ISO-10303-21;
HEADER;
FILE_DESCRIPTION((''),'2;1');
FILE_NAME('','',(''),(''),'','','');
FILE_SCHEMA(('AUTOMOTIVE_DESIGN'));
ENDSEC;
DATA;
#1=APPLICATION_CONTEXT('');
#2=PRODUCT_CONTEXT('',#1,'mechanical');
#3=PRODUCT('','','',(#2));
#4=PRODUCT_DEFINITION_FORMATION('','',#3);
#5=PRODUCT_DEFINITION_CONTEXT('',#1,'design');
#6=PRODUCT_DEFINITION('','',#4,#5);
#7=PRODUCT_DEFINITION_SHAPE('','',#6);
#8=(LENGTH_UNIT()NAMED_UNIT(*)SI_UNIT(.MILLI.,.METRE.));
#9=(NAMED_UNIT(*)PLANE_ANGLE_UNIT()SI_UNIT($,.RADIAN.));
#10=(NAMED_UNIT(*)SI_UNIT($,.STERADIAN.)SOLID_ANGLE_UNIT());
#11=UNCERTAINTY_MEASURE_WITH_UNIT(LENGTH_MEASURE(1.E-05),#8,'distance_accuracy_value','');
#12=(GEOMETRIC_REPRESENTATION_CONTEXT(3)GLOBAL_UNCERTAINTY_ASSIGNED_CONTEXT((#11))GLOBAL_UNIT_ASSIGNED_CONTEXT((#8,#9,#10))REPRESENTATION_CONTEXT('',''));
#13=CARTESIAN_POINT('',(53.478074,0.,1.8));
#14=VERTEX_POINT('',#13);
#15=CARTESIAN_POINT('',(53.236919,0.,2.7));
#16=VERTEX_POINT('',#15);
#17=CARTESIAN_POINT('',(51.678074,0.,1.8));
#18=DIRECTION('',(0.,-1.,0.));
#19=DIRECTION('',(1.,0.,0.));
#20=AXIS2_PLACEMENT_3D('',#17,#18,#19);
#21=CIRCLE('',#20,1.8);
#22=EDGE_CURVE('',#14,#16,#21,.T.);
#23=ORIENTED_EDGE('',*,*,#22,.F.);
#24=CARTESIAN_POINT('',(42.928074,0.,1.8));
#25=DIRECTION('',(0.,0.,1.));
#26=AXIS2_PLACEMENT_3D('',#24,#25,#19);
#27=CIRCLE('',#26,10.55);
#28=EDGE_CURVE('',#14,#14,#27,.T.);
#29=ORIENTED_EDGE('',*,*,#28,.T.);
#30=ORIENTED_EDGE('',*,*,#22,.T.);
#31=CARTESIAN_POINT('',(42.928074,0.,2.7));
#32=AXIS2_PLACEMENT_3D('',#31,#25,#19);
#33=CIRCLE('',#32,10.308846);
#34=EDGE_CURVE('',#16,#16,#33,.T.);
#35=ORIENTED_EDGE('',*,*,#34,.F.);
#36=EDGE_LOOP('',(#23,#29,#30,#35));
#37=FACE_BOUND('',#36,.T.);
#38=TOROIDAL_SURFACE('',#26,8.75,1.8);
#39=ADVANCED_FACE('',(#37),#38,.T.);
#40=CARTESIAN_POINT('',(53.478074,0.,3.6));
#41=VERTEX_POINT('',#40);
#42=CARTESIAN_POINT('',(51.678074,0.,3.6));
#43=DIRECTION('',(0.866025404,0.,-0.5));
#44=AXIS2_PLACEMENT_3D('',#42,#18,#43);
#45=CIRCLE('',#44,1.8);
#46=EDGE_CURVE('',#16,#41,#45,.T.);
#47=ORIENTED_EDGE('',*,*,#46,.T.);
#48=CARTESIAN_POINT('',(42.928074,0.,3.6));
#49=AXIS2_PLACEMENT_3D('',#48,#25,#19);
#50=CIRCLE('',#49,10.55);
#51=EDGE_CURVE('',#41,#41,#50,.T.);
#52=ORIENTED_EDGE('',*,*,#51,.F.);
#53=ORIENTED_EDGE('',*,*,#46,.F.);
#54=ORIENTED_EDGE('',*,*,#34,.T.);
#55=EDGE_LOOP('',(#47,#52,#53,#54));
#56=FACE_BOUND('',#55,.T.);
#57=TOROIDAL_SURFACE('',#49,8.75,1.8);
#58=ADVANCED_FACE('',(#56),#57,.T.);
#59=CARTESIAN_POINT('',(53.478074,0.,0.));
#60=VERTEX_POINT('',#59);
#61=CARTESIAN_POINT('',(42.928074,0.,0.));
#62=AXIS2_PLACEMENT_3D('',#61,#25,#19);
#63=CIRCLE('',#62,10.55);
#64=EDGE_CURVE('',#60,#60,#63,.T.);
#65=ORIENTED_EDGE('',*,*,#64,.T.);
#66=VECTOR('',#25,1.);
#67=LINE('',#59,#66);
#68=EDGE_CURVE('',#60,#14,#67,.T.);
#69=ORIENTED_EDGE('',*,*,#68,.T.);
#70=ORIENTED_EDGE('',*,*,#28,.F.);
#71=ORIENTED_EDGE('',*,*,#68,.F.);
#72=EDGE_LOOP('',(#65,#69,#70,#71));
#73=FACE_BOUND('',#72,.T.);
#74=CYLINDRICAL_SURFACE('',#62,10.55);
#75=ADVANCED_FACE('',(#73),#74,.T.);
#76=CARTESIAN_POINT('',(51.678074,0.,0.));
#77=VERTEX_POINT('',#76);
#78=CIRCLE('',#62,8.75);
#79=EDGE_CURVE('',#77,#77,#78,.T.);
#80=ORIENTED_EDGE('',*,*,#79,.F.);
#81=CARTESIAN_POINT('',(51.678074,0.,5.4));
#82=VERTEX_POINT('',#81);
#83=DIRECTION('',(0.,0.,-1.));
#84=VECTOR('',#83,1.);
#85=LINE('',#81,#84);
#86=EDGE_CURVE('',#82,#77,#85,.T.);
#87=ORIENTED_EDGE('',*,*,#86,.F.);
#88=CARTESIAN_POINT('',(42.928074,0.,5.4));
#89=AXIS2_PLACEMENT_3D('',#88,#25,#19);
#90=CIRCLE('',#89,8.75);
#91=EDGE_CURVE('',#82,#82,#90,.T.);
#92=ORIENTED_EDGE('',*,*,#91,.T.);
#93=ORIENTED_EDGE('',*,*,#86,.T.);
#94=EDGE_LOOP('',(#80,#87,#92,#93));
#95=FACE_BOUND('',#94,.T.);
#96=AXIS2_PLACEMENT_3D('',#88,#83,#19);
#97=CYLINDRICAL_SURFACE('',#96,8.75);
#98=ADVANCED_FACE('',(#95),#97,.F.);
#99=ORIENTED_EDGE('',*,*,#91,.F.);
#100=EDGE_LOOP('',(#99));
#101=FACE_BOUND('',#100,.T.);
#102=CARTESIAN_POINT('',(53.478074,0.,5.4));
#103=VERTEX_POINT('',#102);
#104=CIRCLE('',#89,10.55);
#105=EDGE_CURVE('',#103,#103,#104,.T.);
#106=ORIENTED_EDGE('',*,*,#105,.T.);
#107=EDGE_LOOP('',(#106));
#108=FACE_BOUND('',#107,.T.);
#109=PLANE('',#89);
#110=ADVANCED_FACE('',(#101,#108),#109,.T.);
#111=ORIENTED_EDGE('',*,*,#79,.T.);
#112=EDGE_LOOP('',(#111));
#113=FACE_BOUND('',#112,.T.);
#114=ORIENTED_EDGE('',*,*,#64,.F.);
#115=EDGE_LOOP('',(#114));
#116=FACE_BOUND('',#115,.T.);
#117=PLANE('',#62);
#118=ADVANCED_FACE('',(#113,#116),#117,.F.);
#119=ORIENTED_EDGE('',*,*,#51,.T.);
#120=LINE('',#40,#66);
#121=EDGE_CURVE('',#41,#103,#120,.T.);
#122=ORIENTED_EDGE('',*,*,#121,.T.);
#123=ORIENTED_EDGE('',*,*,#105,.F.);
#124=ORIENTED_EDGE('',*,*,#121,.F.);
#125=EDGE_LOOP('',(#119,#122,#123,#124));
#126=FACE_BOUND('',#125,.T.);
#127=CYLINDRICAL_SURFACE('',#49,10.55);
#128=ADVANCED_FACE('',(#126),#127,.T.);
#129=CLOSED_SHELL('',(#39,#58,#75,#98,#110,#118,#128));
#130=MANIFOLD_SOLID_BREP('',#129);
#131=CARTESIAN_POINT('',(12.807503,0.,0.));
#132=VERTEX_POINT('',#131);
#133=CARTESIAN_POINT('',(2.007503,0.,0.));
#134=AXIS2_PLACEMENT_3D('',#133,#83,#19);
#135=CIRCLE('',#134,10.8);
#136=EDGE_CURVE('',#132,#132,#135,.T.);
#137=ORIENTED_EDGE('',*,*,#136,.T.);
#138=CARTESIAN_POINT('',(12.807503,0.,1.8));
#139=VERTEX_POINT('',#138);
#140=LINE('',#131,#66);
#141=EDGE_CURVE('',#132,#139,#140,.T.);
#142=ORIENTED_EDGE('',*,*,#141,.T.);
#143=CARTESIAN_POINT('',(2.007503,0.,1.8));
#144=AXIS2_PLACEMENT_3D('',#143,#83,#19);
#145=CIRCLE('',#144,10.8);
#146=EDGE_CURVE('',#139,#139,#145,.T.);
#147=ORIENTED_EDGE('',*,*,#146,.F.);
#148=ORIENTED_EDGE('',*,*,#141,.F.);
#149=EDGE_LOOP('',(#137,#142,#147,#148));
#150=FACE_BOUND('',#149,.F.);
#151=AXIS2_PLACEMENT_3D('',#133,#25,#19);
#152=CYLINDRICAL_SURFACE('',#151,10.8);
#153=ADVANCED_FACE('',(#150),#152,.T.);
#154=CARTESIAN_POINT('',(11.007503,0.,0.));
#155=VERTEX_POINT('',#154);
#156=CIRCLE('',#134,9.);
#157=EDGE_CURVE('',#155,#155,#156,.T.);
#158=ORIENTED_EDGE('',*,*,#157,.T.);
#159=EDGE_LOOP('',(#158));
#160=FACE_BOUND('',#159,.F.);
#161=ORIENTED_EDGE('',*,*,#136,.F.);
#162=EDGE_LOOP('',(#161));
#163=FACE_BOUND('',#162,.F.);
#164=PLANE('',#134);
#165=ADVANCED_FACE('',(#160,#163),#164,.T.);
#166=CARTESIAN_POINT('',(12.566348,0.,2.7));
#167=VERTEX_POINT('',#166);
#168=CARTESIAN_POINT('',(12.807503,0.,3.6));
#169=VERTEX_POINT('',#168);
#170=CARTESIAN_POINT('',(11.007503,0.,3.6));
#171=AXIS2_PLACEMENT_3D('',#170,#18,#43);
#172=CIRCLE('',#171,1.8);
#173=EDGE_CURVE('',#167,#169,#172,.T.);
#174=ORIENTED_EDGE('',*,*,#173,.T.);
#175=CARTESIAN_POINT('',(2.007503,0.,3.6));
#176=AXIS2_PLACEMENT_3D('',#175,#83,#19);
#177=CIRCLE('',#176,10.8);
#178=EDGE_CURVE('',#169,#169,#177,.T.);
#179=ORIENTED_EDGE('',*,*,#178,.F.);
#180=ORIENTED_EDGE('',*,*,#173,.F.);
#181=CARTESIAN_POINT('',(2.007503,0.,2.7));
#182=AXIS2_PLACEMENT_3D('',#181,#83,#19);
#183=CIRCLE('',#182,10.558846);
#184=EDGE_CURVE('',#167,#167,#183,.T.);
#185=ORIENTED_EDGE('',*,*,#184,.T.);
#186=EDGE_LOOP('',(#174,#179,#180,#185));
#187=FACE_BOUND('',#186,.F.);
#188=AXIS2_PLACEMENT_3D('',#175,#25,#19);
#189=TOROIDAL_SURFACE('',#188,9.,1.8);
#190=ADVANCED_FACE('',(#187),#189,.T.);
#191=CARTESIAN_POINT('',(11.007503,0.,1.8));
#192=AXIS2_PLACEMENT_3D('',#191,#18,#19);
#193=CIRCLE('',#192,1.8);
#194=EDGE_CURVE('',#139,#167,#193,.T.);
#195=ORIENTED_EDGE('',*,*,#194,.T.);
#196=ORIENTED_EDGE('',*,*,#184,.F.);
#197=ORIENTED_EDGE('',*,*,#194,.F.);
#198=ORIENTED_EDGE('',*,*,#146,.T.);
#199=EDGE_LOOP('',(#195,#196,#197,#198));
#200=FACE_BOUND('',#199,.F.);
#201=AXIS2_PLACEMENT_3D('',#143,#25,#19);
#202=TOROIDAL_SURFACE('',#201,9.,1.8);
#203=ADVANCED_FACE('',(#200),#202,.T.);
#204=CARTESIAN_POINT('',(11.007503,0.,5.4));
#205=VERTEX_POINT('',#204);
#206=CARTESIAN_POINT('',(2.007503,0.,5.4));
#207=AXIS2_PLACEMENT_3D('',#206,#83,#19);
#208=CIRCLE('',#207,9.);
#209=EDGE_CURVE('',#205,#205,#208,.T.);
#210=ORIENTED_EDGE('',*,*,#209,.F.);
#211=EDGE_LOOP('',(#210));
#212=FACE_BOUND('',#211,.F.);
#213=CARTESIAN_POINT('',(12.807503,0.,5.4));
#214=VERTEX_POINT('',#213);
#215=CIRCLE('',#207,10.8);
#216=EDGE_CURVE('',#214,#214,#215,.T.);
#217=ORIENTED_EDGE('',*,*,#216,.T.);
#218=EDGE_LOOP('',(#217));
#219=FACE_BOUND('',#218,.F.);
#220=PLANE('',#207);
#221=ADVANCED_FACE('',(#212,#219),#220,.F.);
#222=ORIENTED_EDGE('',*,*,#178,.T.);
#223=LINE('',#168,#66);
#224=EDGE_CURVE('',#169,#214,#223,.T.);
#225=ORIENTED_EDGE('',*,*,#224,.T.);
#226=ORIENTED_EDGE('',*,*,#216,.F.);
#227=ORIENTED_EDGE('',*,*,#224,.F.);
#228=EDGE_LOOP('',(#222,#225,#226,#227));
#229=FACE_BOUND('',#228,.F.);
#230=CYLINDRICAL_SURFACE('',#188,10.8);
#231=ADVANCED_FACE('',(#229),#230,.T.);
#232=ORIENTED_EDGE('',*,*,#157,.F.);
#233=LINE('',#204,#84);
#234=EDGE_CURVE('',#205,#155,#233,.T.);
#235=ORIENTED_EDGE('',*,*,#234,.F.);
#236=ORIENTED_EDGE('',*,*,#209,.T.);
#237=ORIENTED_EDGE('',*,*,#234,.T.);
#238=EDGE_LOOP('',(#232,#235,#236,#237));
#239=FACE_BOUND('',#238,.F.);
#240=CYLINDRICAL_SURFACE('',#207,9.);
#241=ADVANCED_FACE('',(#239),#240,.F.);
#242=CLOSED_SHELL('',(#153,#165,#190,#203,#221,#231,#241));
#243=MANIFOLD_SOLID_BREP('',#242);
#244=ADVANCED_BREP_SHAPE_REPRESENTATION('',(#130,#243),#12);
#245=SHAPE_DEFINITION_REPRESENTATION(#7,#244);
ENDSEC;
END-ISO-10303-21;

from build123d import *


with BuildPart() as f1:
    # F0 (on Front) → F1 (revolve)
    with BuildSketch(Plane.XZ):
        with BuildLine():
            Line((11.0075026751, 1.8), (11.0075026751, 0))
            ThreePointArc((11.0075026751, 0), (12.2802948812, 0.5272077939), (12.8075026751, 1.8))
            ThreePointArc((12.8075026751, 1.8), (12.7461691624, 2.2658742812), (12.5663484019, 2.7))
            ThreePointArc((12.5663484019, 2.7), (11.9075026751, 2.0411542732), (11.0075026751, 1.8))
        make_face()
        with BuildLine():
            ThreePointArc((12.8075026751, 1.8), (12.2802948812, 0.5272077939), (11.0075026751, 0))
            Line((11.0075026751, 0), (12.8075026751, 0))
            Line((12.8075026751, 0), (12.8075026751, 1.8))
        make_face()
        with BuildLine():
            Line((11.0075026751, 2.7), (11.0075026751, 1.8))
            ThreePointArc((11.0075026751, 1.8), (11.9075026751, 2.0411542732), (12.5663484019, 2.7))
            ThreePointArc((12.5663484019, 2.7), (12.528210521, 2.7630408337), (12.4875246825, 2.8244680851))
            ThreePointArc((12.4875246825, 2.8244680851), (11.8429538845, 3.3943717498), (11.0075026751, 3.6))
            Line((11.0075026751, 3.6), (11.0075026751, 2.7))
        make_face()
        with BuildLine():
            ThreePointArc((12.4875246825, 2.8244680851), (12.528210521, 2.7630408337), (12.5663484019, 2.7))
            ThreePointArc((12.5663484019, 2.7), (12.7461691624, 3.1341257188), (12.8075026751, 3.6))
            Line((12.8075026751, 3.6), (12.8075026751, 5.4))
            Line((12.8075026751, 5.4), (11.0075026751, 5.4))
            Line((11.0075026751, 5.4), (11.0075026751, 3.6))
            ThreePointArc((11.0075026751, 3.6), (11.8429538845, 3.3943717498), (12.4875246825, 2.8244680851))
        make_face()
    revolve(axis=Axis((2.0075026751, 0, 2.4673056323), (0, 0, -1)))


with BuildPart() as f3:
    # F2 (on Front) → F3 (revolve)
    with BuildSketch(Plane.XZ):
        with BuildLine():
            Line((53.4780735552, 5.4), (51.6780735552, 5.4))
            Line((51.6780735552, 5.4), (51.6780735552, 3.6))
            ThreePointArc((51.6780735552, 3.6), (52.5780735552, 3.3588457268), (53.236919282, 2.7))
            ThreePointArc((53.236919282, 2.7), (53.4167400426, 3.1341257188), (53.4780735552, 3.6))
            Line((53.4780735552, 3.6), (53.4780735552, 5.4))
        make_face()
        with BuildLine():
            ThreePointArc((53.236919282, 2.7), (52.5780735552, 3.3588457268), (51.6780735552, 3.6))
            Line((51.6780735552, 3.6), (51.6780735552, 1.8))
            ThreePointArc((51.6780735552, 1.8), (52.5780735552, 2.0411542732), (53.236919282, 2.7))
        make_face()
        with BuildLine():
            ThreePointArc((53.236919282, 2.7), (52.5780735552, 2.0411542732), (51.6780735552, 1.8))
            Line((51.6780735552, 1.8), (51.6780735552, 0))
            Line((51.6780735552, 0), (53.4780735552, 0))
            Line((53.4780735552, 0), (53.4780735552, 1.8))
            ThreePointArc((53.4780735552, 1.8), (53.4167400426, 2.2658742812), (53.236919282, 2.7))
        make_face()
    revolve(axis=Axis((42.9280735552, 0, 5.6644450251), (0, 0, 1)))


solid = Compound([f1.part, f3.part])
